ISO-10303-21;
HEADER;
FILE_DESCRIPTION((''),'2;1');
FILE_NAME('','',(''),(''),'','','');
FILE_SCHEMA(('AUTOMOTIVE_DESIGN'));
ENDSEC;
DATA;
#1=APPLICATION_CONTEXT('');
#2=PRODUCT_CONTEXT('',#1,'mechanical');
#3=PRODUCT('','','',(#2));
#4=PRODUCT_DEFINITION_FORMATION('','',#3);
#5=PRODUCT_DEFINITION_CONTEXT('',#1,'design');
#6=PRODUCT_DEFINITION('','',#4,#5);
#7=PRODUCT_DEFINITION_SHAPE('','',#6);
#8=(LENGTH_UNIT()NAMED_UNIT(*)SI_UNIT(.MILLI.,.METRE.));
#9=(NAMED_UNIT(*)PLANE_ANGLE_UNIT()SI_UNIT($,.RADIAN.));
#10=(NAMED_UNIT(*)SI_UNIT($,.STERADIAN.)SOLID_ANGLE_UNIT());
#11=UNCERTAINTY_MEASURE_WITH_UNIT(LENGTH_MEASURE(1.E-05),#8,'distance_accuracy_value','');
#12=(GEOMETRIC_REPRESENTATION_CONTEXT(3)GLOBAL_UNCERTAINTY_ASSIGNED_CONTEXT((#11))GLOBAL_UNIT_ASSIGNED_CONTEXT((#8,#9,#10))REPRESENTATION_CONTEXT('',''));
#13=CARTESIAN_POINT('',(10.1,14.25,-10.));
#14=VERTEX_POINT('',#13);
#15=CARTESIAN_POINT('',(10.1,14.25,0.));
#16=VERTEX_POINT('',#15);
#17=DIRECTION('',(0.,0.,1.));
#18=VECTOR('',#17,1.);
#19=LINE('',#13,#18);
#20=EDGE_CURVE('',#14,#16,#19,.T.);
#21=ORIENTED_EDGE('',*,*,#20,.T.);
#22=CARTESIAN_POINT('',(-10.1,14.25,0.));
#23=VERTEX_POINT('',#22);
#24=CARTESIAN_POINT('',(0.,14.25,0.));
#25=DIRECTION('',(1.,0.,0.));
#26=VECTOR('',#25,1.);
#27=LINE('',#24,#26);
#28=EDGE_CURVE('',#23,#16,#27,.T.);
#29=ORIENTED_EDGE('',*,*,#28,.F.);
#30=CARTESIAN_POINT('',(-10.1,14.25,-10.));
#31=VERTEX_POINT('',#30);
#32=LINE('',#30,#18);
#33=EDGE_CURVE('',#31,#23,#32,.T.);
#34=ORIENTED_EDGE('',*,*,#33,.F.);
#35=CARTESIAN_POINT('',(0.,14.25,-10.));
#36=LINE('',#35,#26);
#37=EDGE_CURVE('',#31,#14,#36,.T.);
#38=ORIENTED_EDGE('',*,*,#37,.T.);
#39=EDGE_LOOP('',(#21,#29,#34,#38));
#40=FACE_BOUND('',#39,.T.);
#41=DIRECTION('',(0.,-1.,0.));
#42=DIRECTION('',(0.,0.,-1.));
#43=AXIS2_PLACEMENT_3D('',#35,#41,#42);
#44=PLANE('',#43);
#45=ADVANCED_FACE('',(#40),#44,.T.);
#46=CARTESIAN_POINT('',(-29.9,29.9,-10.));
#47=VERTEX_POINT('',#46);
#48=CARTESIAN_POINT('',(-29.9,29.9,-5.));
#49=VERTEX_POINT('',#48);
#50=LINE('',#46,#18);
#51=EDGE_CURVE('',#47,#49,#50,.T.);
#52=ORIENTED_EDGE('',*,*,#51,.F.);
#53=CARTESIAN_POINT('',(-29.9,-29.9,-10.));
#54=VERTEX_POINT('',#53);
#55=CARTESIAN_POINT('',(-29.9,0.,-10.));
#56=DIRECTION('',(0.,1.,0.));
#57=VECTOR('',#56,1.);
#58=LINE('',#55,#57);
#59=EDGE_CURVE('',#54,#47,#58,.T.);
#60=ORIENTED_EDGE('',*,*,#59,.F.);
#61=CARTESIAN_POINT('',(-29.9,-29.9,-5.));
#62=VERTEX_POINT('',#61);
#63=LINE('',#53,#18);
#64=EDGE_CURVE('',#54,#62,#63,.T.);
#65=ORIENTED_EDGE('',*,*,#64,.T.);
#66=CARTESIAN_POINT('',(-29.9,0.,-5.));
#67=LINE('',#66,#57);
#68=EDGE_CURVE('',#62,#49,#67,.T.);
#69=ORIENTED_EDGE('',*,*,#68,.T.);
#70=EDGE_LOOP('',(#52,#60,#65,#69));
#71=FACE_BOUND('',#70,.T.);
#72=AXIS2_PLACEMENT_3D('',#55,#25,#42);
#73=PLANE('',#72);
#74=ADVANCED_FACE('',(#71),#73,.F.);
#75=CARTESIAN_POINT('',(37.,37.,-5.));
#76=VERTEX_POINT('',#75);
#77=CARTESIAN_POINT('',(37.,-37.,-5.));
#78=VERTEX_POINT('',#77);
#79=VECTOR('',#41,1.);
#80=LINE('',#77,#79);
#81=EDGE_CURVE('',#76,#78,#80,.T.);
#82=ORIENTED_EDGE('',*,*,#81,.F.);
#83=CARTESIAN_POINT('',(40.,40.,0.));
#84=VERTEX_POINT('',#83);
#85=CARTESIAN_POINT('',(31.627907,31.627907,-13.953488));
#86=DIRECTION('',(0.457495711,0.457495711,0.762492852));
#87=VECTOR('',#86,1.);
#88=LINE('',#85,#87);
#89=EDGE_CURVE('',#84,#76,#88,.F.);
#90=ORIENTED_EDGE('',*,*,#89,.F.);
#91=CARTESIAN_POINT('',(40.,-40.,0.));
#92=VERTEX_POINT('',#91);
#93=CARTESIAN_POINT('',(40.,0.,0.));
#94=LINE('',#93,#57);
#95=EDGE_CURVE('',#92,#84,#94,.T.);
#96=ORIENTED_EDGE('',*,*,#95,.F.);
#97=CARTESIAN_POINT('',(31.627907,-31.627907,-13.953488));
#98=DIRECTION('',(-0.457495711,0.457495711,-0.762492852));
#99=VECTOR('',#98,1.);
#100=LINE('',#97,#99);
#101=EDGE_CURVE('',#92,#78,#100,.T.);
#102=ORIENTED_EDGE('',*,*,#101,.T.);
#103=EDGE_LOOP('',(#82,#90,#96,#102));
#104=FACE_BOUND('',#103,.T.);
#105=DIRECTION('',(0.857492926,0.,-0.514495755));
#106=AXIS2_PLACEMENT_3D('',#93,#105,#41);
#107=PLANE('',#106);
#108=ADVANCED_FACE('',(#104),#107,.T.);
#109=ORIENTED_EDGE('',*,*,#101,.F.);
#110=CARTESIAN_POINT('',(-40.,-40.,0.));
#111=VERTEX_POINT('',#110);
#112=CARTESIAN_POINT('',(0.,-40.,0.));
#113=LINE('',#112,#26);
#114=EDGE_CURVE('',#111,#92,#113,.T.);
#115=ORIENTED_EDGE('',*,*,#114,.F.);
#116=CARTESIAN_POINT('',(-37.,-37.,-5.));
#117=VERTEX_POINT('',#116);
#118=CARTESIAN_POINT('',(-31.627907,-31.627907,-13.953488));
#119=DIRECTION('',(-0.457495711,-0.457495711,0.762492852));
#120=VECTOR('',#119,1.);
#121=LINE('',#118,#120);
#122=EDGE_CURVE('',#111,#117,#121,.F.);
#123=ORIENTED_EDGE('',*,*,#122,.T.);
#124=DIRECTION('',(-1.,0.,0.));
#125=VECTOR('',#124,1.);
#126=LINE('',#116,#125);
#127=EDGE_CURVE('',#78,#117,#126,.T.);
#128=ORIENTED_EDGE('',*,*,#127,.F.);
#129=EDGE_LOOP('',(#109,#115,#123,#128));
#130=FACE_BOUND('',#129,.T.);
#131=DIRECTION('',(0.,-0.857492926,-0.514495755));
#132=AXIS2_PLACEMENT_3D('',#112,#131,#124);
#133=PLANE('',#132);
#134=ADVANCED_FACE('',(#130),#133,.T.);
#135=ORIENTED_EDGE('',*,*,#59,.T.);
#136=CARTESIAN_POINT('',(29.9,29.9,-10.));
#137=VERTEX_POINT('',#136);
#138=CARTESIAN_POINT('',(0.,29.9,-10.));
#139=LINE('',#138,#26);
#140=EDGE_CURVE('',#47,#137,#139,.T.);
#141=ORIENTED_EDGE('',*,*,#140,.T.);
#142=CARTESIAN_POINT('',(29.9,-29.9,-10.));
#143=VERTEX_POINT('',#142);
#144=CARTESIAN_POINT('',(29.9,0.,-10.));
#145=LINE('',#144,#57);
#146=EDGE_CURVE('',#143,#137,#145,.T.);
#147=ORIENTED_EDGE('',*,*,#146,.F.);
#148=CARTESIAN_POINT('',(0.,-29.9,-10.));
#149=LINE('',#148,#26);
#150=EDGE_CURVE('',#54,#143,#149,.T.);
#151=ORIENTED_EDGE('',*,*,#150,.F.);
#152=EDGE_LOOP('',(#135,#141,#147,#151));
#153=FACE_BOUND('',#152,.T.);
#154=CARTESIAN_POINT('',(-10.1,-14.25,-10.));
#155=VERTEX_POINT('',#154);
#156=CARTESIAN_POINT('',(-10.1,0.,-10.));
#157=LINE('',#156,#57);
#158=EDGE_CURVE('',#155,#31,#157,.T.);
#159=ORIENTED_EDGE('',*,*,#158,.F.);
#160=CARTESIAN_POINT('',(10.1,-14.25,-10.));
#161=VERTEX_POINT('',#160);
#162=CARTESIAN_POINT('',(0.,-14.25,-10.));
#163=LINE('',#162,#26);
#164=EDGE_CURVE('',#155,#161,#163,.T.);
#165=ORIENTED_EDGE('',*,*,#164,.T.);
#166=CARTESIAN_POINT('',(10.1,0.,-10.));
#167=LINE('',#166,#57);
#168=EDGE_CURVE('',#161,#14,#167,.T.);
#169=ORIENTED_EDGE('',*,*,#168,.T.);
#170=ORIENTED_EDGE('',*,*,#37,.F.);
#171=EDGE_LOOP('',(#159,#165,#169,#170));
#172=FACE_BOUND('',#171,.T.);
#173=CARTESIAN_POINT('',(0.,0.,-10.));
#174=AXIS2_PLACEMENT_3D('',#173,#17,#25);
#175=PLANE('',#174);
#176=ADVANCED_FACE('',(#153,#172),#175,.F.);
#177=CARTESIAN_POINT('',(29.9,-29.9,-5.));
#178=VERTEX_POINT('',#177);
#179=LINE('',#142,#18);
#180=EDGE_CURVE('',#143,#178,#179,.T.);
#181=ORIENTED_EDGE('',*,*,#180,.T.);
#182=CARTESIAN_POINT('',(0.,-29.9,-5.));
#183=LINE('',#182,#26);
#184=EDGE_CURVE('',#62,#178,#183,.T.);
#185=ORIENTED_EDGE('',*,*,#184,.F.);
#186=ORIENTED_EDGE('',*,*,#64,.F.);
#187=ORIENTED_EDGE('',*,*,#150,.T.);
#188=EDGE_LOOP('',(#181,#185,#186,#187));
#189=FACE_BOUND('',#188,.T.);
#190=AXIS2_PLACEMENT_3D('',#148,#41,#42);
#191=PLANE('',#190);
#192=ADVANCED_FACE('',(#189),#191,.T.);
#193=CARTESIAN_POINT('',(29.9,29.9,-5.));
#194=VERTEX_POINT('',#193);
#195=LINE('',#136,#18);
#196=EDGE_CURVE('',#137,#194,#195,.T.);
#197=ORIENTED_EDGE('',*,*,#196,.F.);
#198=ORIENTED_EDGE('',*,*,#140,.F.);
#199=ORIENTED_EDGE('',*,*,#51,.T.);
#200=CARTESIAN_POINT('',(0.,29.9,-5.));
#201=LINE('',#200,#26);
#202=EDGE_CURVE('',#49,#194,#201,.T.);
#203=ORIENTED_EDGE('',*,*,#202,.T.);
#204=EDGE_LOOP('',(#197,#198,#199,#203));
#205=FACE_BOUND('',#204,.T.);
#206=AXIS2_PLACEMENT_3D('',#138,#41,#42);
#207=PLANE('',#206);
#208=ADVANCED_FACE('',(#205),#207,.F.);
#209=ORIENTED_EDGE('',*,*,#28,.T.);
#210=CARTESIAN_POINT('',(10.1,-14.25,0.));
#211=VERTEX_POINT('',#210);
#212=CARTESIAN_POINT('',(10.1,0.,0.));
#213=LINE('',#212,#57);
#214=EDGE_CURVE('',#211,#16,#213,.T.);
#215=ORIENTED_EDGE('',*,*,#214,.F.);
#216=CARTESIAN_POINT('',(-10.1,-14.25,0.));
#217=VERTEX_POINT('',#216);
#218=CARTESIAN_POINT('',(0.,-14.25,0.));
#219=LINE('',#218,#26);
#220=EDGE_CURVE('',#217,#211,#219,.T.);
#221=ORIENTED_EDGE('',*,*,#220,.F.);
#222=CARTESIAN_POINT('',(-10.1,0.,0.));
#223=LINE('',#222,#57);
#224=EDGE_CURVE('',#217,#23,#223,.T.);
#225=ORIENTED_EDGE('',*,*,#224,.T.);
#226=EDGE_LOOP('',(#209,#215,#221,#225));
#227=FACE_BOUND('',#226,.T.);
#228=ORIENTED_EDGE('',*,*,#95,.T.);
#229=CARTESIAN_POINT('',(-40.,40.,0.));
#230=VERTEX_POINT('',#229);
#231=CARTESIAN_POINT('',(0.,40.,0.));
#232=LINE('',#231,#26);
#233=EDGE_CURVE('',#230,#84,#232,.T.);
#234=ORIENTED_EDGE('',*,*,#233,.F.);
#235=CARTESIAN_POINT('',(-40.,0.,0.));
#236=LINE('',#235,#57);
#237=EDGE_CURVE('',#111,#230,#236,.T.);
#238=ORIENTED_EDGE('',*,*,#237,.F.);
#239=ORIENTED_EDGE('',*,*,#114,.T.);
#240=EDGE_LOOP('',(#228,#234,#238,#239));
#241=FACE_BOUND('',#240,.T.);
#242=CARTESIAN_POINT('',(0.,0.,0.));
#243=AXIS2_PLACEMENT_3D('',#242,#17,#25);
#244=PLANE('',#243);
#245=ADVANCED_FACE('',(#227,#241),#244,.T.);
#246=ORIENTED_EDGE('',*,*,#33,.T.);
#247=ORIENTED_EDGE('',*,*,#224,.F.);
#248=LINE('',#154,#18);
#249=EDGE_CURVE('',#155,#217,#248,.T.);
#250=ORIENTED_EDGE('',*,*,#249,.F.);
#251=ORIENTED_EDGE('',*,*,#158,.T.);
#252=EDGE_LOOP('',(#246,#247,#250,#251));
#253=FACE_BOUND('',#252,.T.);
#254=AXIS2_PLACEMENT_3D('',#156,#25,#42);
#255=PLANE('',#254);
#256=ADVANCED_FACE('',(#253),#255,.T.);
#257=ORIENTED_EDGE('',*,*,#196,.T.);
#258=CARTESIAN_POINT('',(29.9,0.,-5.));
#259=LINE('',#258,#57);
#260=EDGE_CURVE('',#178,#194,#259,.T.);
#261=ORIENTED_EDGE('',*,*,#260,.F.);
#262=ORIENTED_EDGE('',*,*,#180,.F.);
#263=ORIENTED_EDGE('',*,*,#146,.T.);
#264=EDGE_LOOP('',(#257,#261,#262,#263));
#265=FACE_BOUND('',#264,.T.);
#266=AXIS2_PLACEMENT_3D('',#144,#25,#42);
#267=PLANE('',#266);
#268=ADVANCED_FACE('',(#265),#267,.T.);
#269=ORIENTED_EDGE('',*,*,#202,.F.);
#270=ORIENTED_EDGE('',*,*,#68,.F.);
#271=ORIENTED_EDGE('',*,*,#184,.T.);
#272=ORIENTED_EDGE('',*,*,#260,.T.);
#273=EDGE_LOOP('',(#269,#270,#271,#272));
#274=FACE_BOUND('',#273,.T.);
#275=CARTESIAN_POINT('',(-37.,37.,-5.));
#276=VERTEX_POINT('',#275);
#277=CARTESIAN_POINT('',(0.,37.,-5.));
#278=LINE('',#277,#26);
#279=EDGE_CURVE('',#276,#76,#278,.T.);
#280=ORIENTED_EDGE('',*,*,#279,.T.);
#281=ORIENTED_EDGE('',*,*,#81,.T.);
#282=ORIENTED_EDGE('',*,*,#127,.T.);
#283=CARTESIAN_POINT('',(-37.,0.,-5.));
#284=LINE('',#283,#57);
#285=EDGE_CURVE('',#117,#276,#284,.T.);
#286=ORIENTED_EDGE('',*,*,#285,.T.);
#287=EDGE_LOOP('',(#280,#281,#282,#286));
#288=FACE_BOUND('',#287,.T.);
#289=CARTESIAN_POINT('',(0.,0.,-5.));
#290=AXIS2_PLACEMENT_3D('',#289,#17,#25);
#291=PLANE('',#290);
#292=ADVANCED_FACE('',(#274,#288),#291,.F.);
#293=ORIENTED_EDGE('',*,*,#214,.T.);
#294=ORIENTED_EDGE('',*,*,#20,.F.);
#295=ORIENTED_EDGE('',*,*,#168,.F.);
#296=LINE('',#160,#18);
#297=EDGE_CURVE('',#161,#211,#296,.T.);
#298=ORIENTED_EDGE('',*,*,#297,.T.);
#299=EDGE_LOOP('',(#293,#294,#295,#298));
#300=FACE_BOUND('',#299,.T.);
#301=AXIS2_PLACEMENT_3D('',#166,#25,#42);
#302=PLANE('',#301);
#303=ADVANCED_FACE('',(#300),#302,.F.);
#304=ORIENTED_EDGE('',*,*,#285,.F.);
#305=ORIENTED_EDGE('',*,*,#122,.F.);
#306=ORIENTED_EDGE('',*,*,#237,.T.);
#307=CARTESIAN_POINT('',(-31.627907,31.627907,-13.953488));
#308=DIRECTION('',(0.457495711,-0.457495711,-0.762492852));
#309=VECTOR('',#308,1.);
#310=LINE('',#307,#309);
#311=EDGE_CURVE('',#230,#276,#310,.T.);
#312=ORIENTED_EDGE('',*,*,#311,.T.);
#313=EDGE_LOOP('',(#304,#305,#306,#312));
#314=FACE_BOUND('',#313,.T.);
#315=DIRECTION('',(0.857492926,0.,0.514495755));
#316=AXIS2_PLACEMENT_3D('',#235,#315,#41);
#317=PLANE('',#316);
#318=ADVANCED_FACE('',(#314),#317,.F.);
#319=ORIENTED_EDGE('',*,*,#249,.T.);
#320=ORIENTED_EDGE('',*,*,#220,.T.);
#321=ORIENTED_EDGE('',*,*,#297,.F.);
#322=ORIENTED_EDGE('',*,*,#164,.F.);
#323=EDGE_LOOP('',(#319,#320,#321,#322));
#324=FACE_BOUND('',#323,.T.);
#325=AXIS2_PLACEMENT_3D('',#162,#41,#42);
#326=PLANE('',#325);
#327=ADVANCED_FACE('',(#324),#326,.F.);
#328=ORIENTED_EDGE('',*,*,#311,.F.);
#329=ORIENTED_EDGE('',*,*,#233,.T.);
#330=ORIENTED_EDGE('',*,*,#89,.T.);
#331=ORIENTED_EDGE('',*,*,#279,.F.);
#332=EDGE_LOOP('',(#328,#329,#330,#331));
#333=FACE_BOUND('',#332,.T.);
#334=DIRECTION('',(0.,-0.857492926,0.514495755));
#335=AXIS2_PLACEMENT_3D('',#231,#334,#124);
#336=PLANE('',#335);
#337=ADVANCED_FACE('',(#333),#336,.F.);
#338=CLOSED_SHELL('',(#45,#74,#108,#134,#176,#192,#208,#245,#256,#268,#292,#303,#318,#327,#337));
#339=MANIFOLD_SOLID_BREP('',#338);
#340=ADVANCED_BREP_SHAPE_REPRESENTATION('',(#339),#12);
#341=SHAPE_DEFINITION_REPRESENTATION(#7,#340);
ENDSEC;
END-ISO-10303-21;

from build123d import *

# Parameters (mm, degrees)
CROQUIS1_W              = 59.8
CROQUIS1_H              = 59.8
CROQUIS1_W_2            = 20.2
CROQUIS1_H_2            = 28.5
SALIENTE_EXTRUIR1_DEPTH = 10
CROQUIS1_3_W            = 20.2
CROQUIS1_3_H            = 28.5
CORTAR_EXTRUIR1_DEPTH   = 10
CROQUIS1_4_W            = 80
CROQUIS1_4_H            = 80
CROQUIS1_4_W_2          = 59.8
CROQUIS1_4_H_2          = 59.8
SALIENTE_EXTRUIR2_DEPTH = 5
CHAFL_N2_START          = -40
CHAFL_N2_DEPTH          = 80
CHAFL_N2_START_2        = -41
CHAFL_N2_2_DEPTH        = 82


with BuildPart() as part:
    # Croquis1 → Saliente-Extruir1 (new body)
    # profile 1 of 2: a face of its own
    with BuildSketch(Plane.XY):
        Rectangle(CROQUIS1_W, CROQUIS1_H)
        Rectangle(CROQUIS1_W_2, CROQUIS1_H_2, mode=Mode.SUBTRACT)
    # profile 2 of 2: a face of its own
    with BuildSketch(Plane.XY):
        Rectangle(CROQUIS1_W_2, CROQUIS1_H_2)
    extrude(amount=-SALIENTE_EXTRUIR1_DEPTH)

    # Croquis1<3> → Cortar-Extruir1 (cut)
    with BuildSketch(Plane.XY):
        Rectangle(CROQUIS1_3_W, CROQUIS1_3_H)
    extrude(amount=-CORTAR_EXTRUIR1_DEPTH, mode=Mode.SUBTRACT)

    # Croquis1<4> → Saliente-Extruir2 (add)
    with BuildSketch(Plane.XY):
        Rectangle(CROQUIS1_4_W, CROQUIS1_4_H)
        Rectangle(CROQUIS1_4_W_2, CROQUIS1_4_H_2, mode=Mode.SUBTRACT)
    extrude(amount=-SALIENTE_EXTRUIR2_DEPTH)

    # Chaflán2: read off the stored shape, not the designer's step
    # Chaflán2 outline → Chaflán2 (cut)
    with BuildSketch(Plane(origin=(0, 0, 0), x_dir=(1, 0, 0), z_dir=(0, 1, 0)).offset(CHAFL_N2_START)):
        Polygon((-40, 5), (-40, 0), (-37, 5), align=None)
        Polygon((40, 5), (37, 5), (40, 0), align=None)
    extrude(amount=CHAFL_N2_DEPTH, mode=Mode.SUBTRACT)

    # Chafl_n2 2 outline → Chafl_n2 2 (cut)
    with BuildSketch(Plane.YZ.offset(CHAFL_N2_START_2)):
        Polygon((40, -5), (40, 0), (37, -5), align=None)
        Polygon((-40, -5), (-37, -5), (-40, 0), align=None)
    extrude(amount=CHAFL_N2_2_DEPTH, mode=Mode.SUBTRACT)


solid = part.part
